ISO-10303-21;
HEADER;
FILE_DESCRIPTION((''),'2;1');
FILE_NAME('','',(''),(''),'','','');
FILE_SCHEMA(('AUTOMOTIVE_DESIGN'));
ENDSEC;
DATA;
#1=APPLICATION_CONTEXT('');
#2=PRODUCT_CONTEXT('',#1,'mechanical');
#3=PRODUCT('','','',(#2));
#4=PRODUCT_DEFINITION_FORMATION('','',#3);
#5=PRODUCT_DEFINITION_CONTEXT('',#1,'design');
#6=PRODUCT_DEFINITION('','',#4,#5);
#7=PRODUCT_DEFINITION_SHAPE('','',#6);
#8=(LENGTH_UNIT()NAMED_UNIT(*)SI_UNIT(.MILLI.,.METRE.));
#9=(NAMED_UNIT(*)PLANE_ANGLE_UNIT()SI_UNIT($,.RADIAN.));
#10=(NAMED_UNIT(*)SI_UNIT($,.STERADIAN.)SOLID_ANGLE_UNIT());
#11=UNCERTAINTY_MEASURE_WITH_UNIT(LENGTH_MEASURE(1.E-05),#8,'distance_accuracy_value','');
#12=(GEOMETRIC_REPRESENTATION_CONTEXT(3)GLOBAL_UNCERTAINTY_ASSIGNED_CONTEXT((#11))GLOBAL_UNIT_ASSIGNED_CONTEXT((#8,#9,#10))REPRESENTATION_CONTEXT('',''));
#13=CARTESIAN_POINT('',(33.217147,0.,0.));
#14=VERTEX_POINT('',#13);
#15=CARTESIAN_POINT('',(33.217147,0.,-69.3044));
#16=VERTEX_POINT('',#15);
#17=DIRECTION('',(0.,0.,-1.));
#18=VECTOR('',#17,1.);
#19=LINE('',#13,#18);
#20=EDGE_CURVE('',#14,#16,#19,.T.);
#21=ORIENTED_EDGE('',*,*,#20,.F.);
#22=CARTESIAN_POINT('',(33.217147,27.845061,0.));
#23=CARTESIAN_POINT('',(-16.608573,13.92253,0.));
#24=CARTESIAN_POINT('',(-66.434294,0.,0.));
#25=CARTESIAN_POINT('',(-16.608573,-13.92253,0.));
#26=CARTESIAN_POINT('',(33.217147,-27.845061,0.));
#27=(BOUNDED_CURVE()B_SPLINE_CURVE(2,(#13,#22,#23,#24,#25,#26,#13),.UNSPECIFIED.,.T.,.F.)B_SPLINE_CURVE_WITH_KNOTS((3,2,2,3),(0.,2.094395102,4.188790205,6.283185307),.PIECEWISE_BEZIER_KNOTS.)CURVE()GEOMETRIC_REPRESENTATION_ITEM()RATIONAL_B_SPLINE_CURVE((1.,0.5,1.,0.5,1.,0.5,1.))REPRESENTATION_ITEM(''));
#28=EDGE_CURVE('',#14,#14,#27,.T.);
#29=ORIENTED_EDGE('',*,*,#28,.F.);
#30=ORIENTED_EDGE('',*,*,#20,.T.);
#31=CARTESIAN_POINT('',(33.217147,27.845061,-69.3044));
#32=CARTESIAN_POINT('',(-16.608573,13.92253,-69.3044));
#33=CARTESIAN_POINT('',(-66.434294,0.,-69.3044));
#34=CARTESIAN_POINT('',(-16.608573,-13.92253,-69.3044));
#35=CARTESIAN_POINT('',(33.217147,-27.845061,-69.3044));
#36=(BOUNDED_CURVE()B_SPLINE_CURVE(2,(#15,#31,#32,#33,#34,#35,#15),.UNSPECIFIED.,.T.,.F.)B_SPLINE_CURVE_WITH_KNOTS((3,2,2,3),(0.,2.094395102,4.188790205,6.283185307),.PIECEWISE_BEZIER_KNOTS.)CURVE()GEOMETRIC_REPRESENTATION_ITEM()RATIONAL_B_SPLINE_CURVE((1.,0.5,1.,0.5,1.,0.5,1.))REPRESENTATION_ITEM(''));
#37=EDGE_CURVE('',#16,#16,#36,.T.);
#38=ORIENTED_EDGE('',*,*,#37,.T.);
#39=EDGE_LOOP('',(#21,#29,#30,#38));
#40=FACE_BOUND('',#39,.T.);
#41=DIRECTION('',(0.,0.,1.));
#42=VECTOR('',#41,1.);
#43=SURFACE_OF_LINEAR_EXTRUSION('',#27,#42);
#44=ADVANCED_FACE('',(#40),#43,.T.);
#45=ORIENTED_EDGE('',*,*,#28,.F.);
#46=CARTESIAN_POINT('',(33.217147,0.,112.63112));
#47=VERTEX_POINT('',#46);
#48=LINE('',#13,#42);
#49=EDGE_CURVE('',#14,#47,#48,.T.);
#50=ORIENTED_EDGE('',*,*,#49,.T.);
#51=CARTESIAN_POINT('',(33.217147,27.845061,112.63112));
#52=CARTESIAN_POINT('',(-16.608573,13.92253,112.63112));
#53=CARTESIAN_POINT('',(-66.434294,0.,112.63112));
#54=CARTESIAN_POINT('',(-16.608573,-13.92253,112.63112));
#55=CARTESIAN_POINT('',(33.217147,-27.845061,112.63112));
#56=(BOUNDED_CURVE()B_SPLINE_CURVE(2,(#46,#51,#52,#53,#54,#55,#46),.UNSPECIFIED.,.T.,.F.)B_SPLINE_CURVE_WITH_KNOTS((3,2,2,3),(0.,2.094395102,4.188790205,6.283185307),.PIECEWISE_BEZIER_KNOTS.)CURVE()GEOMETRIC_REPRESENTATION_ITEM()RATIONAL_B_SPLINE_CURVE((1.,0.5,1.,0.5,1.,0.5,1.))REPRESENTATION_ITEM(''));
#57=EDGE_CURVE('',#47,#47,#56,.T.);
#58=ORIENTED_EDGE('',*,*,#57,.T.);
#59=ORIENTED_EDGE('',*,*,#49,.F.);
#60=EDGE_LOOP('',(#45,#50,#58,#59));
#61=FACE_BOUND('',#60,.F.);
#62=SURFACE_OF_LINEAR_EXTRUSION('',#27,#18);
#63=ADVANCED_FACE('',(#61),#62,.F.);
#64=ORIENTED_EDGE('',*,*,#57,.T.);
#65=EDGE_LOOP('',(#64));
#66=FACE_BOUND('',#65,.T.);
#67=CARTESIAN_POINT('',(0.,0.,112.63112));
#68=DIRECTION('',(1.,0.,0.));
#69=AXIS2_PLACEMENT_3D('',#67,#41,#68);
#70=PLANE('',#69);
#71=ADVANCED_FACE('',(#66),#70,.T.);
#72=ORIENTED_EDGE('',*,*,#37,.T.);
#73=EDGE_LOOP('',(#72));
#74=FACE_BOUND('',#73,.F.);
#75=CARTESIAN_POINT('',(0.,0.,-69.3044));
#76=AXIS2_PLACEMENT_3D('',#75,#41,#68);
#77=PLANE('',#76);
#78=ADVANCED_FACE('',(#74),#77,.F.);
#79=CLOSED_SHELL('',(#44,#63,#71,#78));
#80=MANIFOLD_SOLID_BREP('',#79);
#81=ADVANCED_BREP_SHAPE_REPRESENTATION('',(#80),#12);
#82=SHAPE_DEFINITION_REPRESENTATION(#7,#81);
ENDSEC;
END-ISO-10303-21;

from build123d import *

# Parameters (mm, degrees)
F1_DEPTH      = 112.63112
F1_DEPTH_BACK = 69.3044


# Not quite as in the source:
# - the program builds the solid bodies; features that only make, move or delete a surface that nothing else refers to are left out


with BuildPart() as f1:
    # F0 (on Top) → F1 (new body, two sides)
    with BuildSketch(Plane.XY) as f1_sk:
        with BuildLine():
            add(Edge.make_bspline(
                [(33.2171469927, 0), (33.2171469927, 27.84506076), (-16.6085734963, 13.92253038), (-66.4342939854, 0), (-16.6085734963, -13.92253038), (33.2171469927, -27.84506076), (33.2171469927, 0)],
                knots=[0, 0, 0, 2.0943951024, 2.0943951024, 4.1887902048, 4.1887902048, 6.2831853072, 6.2831853072, 6.2831853072], degree=2, weights=[1, 0.5, 1, 0.5, 1, 0.5, 1]))
        make_face()
    extrude(amount=F1_DEPTH)
    extrude(f1_sk.sketch, amount=-F1_DEPTH_BACK)


solid = f1.part
